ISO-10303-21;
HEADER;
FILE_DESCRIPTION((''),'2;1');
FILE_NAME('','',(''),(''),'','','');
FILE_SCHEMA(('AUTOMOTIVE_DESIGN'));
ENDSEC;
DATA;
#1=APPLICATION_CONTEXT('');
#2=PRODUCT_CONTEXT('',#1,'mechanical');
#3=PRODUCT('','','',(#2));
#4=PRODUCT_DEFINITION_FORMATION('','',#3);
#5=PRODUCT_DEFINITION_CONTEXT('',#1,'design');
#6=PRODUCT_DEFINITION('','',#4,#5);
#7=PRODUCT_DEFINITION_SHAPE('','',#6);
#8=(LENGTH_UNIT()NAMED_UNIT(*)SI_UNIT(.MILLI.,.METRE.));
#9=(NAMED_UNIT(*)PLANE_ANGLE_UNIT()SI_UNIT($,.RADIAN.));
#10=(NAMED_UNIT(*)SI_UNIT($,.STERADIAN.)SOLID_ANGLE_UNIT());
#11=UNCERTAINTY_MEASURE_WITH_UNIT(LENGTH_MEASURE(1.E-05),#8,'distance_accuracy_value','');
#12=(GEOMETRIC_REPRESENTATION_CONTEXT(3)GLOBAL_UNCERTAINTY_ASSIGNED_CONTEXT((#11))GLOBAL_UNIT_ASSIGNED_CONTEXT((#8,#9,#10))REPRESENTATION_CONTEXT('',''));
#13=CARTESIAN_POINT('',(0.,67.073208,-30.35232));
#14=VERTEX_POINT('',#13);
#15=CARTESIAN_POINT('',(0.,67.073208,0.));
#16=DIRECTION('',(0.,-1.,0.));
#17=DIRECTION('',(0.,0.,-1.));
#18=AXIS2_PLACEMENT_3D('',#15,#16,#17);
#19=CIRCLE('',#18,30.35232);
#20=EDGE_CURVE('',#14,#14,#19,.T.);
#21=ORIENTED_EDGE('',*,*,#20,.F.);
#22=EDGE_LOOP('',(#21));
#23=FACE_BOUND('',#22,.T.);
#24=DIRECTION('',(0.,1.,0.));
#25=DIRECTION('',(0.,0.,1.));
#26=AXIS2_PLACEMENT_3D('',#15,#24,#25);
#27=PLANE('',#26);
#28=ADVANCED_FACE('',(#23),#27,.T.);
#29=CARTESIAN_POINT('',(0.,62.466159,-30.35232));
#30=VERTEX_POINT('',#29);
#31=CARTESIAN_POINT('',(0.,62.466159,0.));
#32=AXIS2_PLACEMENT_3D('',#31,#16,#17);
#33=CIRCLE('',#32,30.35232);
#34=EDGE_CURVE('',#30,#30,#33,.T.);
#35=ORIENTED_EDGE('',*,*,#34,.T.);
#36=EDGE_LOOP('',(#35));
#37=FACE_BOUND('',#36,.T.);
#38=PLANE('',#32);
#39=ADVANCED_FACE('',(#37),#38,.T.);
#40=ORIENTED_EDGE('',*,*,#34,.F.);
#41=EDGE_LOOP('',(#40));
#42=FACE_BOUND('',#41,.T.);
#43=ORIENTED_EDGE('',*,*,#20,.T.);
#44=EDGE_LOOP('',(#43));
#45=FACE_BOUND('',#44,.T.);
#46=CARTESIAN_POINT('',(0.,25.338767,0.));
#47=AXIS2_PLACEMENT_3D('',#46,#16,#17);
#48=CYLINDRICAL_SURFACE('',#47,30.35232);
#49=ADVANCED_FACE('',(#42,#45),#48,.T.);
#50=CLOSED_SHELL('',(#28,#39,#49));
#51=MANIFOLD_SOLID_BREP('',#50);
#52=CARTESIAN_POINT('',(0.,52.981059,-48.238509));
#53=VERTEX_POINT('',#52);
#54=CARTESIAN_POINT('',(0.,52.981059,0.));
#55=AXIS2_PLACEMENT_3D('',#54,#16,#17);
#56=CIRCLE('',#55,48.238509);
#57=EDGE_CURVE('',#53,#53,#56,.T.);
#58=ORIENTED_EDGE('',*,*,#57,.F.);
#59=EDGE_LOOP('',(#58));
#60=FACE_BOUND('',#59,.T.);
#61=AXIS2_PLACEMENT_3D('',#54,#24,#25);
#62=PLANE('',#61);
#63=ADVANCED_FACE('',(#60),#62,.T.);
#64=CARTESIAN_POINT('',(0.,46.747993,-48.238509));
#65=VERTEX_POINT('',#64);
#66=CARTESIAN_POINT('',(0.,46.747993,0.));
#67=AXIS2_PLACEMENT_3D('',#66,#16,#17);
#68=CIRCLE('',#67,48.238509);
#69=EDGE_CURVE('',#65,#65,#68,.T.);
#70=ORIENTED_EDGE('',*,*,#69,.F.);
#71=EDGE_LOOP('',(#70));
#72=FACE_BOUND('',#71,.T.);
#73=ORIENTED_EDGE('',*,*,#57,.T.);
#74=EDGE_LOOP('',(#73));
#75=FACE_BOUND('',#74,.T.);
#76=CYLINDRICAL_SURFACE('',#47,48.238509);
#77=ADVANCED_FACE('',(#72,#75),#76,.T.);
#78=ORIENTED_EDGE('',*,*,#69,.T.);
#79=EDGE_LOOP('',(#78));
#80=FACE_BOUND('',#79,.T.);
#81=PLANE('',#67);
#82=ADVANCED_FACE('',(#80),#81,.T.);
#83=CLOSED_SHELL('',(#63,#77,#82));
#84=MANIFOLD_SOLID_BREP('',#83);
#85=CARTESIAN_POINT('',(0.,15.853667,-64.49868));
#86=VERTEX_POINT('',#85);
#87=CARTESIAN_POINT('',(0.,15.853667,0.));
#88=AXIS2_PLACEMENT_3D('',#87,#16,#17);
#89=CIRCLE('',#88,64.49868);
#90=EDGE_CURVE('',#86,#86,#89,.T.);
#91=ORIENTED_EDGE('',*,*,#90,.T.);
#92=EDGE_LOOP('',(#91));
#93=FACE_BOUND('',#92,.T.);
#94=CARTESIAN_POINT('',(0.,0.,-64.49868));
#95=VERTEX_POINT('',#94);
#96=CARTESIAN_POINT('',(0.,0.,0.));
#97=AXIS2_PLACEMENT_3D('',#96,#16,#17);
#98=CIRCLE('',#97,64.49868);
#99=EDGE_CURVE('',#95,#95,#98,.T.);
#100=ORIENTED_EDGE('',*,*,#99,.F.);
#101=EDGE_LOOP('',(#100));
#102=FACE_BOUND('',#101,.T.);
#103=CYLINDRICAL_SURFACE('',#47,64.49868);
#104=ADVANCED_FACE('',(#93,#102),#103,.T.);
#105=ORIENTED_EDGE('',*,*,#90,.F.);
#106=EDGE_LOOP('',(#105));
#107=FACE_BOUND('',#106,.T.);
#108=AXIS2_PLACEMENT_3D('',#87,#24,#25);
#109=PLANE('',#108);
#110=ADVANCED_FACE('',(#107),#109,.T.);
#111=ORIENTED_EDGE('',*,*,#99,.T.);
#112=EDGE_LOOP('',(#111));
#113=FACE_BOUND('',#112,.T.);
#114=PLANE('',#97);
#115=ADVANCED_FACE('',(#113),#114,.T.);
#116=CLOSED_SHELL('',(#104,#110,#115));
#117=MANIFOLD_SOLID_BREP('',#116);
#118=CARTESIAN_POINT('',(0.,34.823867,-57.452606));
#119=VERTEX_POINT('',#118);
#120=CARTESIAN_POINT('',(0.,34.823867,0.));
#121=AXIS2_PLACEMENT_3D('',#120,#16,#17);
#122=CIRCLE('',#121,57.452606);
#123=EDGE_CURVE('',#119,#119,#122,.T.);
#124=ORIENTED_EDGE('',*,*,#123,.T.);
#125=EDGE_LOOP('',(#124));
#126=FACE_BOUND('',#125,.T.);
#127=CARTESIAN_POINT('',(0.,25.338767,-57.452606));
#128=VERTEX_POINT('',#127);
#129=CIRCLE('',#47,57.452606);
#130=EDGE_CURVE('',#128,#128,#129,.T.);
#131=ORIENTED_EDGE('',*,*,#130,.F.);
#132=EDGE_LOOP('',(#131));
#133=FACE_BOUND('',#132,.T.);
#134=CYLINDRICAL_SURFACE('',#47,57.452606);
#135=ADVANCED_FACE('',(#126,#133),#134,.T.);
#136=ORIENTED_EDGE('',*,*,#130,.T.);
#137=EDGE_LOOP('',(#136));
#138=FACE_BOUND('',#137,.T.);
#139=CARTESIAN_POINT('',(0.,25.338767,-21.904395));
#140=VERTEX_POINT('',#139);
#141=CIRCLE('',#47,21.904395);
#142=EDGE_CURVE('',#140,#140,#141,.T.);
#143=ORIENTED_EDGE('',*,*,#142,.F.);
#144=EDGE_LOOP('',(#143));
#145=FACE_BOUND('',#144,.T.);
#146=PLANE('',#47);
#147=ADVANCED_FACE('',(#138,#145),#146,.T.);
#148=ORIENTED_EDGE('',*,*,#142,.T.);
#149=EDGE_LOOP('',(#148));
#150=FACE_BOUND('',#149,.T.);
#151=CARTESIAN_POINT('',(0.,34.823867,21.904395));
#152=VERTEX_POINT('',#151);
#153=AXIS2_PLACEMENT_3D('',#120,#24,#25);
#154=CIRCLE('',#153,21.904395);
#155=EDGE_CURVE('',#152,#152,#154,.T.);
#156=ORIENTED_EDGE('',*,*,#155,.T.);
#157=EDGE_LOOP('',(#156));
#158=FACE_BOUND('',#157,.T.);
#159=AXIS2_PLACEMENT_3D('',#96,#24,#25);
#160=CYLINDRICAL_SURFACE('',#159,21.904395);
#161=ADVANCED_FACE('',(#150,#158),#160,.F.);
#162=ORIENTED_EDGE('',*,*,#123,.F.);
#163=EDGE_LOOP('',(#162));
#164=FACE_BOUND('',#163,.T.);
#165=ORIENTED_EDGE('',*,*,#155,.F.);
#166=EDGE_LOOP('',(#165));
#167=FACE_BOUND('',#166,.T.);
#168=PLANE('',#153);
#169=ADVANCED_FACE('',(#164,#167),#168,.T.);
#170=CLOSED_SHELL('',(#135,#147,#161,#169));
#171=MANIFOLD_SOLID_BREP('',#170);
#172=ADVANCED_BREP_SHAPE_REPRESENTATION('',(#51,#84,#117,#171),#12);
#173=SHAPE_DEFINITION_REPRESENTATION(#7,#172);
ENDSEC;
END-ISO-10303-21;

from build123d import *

# Parameters (mm, degrees)
SKETCH1_W              = 64.498680347
SKETCH1_H              = 15.853667228
SKETCH1_W_2            = 57.452606024
SKETCH1_H_2            = 9.485100051
SKETCH1_W_3            = 48.238508831
SKETCH1_H_3            = 6.233065748
SKETCH1_W_4            = 30.352320163
SKETCH1_H_4            = 4.607048596
CUT_EXTRUDE1_START     = -41.734440225
CUT_EXTRUDE1_OUTLINE_R = 21.904394949
CUT_EXTRUDE1_DEPTH     = 9.485100051


# Read off the part's stored shape, not the designer's step: Cut-Extrude1
with BuildPart() as part:
    # Sketch1 → Revolve1 (revolve)
    with BuildSketch(Plane.XY, mode=Mode.PRIVATE) as revolve1_sk:
        with Locations((32.249340174, 7.926833614)):
            Rectangle(SKETCH1_W, SKETCH1_H)
        with Locations((28.726303012, 30.081317305)):
            Rectangle(SKETCH1_W_2, SKETCH1_H_2)
        with Locations((24.119254416, 49.864525983)):
            Rectangle(SKETCH1_W_3, SKETCH1_H_3)
        with Locations((15.176160082, 64.769683206)):
            Rectangle(SKETCH1_W_4, SKETCH1_H_4)
    revolve(revolve1_sk.sketch.rotate(Axis((0, 25.338767279, 0), (0, 1, 0)), 90), axis=Axis((0, 25.338767279, 0), (0, 1, 0)))

    # Cut-Extrude1 outline → Cut-Extrude1 (cut)
    with BuildSketch(Plane(origin=(0, 67.073207504, 0), x_dir=(1, 0, 0), z_dir=(0, 1, 0)).offset(CUT_EXTRUDE1_START)):
        Circle(CUT_EXTRUDE1_OUTLINE_R)
    extrude(amount=CUT_EXTRUDE1_DEPTH, mode=Mode.SUBTRACT)


solid = part.part
